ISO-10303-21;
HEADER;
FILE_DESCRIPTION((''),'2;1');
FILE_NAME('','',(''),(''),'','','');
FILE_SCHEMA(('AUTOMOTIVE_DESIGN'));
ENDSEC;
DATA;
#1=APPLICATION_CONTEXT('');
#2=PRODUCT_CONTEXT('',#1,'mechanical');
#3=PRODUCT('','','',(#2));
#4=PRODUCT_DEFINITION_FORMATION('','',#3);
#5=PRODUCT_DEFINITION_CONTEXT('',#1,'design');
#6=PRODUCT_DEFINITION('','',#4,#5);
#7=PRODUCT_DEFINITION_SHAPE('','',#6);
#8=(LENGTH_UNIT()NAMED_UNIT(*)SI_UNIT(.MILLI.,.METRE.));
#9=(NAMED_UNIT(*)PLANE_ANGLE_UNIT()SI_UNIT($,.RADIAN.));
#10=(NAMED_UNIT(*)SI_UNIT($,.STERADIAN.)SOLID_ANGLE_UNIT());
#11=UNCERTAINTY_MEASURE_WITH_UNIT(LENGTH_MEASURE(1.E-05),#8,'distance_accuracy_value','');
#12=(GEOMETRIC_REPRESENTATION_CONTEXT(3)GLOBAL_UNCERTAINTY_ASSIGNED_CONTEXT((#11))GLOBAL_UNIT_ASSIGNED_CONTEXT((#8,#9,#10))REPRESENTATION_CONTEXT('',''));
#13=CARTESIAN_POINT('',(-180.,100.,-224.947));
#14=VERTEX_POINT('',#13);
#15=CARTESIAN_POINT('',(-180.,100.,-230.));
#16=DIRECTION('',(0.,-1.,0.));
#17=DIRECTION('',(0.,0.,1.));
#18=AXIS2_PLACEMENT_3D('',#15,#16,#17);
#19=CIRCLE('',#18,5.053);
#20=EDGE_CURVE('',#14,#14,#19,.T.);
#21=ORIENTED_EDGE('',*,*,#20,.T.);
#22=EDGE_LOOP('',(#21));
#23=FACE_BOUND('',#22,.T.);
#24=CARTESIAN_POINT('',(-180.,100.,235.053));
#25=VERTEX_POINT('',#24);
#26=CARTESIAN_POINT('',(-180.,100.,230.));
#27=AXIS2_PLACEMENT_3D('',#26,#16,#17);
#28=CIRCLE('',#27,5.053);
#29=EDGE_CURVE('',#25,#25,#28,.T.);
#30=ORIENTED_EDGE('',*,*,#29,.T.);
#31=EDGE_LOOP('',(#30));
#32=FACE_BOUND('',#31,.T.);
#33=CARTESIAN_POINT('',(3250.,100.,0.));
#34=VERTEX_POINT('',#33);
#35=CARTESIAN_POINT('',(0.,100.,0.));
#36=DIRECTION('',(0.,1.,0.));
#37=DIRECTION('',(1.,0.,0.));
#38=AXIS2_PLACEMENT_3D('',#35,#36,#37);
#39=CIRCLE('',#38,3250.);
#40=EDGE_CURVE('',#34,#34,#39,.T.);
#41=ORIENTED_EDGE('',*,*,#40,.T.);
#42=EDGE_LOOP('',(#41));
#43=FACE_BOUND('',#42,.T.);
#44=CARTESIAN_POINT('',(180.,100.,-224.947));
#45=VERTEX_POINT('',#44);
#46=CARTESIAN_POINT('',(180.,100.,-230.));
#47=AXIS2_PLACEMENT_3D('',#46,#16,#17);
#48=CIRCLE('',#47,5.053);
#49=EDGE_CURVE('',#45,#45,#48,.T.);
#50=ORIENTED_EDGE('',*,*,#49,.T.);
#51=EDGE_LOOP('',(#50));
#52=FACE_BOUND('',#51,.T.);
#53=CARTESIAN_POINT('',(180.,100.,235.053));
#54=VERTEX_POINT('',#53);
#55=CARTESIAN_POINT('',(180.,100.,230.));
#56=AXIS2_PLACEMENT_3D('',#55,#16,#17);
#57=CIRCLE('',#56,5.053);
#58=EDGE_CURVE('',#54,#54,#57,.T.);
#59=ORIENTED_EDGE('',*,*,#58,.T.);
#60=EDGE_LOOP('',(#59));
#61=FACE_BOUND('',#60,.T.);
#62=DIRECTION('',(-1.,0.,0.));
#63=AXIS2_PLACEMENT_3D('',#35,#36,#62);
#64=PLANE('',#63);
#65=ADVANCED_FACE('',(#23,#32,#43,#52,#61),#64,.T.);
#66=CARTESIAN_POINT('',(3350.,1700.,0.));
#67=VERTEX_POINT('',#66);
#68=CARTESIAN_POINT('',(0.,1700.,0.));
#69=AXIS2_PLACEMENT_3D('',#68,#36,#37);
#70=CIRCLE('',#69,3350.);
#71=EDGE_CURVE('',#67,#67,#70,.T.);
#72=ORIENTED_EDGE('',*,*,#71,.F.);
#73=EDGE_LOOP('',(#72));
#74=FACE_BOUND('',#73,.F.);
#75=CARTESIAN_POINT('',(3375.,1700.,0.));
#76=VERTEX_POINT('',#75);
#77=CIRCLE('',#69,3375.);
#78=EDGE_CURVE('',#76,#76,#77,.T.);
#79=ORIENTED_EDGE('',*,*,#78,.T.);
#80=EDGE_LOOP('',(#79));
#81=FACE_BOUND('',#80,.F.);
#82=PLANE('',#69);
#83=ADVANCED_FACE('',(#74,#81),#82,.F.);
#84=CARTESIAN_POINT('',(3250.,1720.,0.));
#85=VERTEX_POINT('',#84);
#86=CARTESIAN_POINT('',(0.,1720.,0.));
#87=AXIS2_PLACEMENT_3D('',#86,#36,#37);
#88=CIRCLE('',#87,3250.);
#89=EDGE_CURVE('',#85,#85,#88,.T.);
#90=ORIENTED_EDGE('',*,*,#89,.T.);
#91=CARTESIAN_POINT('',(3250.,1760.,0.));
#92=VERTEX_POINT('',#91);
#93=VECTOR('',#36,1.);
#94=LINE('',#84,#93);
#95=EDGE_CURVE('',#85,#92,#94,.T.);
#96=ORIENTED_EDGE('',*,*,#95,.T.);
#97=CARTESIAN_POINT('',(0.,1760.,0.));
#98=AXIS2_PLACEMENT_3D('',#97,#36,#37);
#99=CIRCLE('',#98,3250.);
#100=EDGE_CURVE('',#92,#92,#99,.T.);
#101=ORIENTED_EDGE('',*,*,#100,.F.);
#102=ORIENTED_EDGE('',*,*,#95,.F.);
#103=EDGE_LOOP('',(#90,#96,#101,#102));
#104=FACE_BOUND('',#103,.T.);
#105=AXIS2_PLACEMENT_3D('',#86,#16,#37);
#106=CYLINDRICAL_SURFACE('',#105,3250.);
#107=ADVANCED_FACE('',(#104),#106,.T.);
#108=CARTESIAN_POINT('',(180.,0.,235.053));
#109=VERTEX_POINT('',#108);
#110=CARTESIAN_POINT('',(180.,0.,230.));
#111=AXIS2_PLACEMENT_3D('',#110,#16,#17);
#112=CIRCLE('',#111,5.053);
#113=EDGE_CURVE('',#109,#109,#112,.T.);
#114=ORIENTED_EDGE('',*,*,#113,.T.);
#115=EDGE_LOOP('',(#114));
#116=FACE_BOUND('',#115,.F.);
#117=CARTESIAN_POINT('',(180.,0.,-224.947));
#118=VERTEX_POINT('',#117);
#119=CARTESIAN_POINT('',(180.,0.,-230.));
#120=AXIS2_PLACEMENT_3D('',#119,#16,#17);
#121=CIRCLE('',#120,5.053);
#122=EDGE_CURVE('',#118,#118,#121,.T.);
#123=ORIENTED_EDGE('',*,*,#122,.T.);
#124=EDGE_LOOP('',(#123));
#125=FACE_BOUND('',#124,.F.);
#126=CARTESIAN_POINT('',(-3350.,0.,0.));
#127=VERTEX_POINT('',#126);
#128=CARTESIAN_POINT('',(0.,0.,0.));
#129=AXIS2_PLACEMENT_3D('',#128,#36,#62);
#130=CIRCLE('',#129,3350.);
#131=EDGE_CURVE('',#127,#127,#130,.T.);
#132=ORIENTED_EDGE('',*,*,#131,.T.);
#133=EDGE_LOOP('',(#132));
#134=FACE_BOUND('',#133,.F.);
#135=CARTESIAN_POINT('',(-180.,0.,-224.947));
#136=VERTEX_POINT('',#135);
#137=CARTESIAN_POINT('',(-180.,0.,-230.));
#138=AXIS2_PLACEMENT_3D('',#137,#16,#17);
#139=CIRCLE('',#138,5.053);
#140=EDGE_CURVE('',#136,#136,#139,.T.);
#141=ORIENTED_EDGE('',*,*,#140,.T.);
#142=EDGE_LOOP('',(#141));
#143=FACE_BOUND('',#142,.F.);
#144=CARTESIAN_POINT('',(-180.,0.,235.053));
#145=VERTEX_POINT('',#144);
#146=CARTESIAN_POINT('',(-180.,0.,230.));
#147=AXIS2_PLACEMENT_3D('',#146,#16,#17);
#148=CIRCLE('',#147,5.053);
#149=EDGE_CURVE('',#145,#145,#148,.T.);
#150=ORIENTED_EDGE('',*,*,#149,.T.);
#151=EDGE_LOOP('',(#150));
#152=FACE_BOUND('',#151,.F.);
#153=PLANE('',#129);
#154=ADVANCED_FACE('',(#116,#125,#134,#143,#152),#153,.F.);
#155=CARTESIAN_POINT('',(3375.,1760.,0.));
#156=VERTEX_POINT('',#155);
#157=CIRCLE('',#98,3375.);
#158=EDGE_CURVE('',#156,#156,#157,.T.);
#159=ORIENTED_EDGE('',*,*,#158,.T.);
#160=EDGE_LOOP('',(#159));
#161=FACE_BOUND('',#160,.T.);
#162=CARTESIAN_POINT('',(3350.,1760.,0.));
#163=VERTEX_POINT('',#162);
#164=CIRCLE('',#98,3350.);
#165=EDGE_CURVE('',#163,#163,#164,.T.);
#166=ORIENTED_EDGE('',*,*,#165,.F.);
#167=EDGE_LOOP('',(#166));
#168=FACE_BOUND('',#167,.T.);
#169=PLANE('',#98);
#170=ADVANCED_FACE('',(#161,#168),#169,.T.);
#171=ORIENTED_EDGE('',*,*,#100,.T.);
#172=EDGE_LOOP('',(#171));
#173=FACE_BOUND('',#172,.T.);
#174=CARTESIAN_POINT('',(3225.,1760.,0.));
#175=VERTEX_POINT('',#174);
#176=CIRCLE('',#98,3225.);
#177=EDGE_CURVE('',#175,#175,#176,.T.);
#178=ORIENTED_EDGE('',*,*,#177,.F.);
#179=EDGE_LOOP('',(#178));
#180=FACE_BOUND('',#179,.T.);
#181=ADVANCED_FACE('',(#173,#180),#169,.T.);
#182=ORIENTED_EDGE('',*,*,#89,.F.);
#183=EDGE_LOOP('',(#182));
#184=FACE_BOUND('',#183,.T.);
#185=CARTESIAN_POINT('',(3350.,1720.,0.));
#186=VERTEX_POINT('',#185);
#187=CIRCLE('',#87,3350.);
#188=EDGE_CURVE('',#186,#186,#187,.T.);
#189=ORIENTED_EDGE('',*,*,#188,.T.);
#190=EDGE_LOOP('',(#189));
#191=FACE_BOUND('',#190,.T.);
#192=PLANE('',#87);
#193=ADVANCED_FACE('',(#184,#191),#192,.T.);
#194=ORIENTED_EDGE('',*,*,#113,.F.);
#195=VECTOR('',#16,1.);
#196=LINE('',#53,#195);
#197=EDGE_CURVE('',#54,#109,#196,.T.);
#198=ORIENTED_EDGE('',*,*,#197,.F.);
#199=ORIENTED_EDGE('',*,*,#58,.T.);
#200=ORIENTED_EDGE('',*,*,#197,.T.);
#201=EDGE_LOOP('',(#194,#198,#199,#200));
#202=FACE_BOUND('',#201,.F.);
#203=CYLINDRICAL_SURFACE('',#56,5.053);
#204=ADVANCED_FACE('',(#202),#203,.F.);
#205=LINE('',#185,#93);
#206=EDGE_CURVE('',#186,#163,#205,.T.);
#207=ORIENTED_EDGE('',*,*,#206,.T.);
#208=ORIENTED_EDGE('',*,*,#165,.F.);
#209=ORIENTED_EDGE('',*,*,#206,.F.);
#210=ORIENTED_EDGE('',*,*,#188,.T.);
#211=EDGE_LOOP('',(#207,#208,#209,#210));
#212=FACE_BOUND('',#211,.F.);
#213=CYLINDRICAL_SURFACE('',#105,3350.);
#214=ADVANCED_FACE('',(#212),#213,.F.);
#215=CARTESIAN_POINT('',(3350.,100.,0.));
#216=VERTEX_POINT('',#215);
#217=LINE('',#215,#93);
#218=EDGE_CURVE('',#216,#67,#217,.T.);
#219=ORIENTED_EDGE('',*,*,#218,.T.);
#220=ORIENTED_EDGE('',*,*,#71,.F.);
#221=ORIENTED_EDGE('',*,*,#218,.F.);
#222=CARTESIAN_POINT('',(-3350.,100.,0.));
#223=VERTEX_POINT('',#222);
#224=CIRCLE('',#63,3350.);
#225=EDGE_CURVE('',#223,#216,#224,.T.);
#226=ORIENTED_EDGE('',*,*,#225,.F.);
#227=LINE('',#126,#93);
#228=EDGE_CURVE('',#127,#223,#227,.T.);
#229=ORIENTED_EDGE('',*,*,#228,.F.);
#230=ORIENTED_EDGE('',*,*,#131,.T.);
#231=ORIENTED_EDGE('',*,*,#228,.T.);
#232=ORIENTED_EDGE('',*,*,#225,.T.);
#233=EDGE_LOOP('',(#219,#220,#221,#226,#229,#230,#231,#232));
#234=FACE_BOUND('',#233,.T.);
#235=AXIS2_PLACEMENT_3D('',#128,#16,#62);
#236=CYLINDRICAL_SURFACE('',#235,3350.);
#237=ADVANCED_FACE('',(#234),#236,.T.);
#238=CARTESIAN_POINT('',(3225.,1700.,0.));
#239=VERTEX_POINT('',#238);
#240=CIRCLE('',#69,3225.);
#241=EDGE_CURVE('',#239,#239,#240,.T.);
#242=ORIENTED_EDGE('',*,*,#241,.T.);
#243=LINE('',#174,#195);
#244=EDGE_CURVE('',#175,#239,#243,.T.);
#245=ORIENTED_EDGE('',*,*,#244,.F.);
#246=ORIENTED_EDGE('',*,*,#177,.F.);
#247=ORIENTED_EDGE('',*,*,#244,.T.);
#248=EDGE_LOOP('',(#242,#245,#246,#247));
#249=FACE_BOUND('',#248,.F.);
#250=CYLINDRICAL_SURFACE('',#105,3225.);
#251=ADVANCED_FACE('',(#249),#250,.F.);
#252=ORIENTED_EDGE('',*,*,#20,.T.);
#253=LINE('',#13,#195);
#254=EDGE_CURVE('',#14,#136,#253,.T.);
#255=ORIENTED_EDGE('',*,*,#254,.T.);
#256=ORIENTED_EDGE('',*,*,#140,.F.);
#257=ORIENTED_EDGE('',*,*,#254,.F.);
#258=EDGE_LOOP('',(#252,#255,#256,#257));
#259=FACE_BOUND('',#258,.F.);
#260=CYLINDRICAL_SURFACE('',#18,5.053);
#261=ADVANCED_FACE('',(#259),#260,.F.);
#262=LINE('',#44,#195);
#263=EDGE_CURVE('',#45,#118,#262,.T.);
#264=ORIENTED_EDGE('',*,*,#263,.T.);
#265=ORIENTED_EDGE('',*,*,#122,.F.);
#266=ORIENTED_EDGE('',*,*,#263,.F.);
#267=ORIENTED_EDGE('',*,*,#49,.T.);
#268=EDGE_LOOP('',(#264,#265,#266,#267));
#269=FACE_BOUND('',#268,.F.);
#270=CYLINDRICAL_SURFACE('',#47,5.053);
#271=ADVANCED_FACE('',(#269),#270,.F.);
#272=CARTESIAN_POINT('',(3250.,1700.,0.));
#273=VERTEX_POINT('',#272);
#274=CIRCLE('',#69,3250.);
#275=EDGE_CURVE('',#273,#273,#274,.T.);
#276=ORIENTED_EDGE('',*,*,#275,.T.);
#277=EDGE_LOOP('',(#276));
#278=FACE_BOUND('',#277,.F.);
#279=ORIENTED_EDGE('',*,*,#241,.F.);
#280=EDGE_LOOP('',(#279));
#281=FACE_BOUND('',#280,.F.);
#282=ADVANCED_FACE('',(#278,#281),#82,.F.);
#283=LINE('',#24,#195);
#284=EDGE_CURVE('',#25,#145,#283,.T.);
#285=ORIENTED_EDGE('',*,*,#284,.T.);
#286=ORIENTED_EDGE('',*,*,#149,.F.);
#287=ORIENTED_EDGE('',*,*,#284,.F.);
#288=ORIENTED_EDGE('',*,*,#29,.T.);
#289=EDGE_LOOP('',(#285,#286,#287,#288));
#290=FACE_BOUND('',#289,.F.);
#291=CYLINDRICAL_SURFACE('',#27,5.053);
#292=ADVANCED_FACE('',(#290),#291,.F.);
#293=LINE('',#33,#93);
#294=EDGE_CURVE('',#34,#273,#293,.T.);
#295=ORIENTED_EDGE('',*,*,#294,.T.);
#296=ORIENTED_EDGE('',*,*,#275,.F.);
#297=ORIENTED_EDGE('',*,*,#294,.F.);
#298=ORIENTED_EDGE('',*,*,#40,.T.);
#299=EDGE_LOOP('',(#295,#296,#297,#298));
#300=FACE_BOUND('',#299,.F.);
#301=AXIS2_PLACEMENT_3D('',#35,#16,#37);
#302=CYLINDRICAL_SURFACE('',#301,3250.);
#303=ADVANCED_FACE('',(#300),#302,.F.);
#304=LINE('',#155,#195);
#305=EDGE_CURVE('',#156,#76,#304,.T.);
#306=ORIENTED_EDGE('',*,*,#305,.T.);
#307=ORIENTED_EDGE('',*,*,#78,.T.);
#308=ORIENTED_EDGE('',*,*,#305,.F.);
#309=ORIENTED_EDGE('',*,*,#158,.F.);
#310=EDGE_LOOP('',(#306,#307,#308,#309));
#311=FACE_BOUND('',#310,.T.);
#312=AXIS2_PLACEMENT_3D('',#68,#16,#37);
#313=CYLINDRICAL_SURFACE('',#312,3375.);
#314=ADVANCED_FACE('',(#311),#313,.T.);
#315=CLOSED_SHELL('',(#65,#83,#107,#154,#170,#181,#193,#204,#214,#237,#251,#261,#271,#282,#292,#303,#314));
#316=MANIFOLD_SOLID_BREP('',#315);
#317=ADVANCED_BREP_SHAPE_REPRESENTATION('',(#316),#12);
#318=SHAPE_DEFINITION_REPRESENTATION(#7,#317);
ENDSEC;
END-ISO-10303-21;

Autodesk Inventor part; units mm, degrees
ref_plane "YZ Plane" through (0, 0, 0) normal (1, 0, 0) x (0, 1, 0)
sketch "Sketch1" plane through (0, 0, 0) normal (0, 1, 0) x (-1, 0, 0)
  circle A0 centre (0, 0) radius 3350
  dimension "d1" = 6700
extrude "Extrusion1" add sketch "Sketch1" along normal blind 100
sketch "Sketch2" plane through (0, 100, 0) normal (0, 1, 0) x (1, 0, 0)
  circle A0 centre (0, 0) radius 3250
  circle A1 centre (0, 0) radius 3350
extrude "Extrusion2" add sketch "Sketch2" along normal blind 1600
ref_plane "Work Plane1" through (0, 1700, 0) normal (0, 1, 0) x (1, 0, 0)
sketch "Sketch3" plane through (0, 1700, 0) normal (0, 1, 0) x (1, 0, 0)
  circle A0 centre (0, 0) radius 3225
  circle A1 centre (0, 0) radius 3375
extrude "Extrusion3" add sketch "Sketch3" along normal blind 20
ref_plane "Work Plane2" through (0, 1720, 0) normal (0, 1, 0) x (1, 0, 0)
sketch "Sketch4" plane through (0, 1720, 0) normal (0, 1, 0) x (1, 0, 0)
  circle A0 centre (0, 0) radius 3225
  circle A1 centre (0, 0) radius 3375
  circle A2 centre (0, 0) radius 3250
  circle A3 centre (0, 0) radius 3250 projected
  circle A4 centre (0, 0) radius 3350
extrude "Extrusion4" add sketch "Sketch4" along normal blind 40
sketch "Sketch5" plane through (0, 100, 0) normal (0, 1, 0) x (1, 0, 0)
  point P0 (180, -230)
  point P1 (-180, -230)
  point P2 (180, 230)
  point P3 (-180, 230)
hole "Hole1" at (180, 100, 230) at (-180, 100, 230) at (180, 100, -230) at (-180, 100, -230) direction (0, -1, 0) diameter 10.106 end through all thread size "M12x1.75" class "6H" standard "ISO Metric profile"
properties part number "DomeFloorOldMeasurements"
